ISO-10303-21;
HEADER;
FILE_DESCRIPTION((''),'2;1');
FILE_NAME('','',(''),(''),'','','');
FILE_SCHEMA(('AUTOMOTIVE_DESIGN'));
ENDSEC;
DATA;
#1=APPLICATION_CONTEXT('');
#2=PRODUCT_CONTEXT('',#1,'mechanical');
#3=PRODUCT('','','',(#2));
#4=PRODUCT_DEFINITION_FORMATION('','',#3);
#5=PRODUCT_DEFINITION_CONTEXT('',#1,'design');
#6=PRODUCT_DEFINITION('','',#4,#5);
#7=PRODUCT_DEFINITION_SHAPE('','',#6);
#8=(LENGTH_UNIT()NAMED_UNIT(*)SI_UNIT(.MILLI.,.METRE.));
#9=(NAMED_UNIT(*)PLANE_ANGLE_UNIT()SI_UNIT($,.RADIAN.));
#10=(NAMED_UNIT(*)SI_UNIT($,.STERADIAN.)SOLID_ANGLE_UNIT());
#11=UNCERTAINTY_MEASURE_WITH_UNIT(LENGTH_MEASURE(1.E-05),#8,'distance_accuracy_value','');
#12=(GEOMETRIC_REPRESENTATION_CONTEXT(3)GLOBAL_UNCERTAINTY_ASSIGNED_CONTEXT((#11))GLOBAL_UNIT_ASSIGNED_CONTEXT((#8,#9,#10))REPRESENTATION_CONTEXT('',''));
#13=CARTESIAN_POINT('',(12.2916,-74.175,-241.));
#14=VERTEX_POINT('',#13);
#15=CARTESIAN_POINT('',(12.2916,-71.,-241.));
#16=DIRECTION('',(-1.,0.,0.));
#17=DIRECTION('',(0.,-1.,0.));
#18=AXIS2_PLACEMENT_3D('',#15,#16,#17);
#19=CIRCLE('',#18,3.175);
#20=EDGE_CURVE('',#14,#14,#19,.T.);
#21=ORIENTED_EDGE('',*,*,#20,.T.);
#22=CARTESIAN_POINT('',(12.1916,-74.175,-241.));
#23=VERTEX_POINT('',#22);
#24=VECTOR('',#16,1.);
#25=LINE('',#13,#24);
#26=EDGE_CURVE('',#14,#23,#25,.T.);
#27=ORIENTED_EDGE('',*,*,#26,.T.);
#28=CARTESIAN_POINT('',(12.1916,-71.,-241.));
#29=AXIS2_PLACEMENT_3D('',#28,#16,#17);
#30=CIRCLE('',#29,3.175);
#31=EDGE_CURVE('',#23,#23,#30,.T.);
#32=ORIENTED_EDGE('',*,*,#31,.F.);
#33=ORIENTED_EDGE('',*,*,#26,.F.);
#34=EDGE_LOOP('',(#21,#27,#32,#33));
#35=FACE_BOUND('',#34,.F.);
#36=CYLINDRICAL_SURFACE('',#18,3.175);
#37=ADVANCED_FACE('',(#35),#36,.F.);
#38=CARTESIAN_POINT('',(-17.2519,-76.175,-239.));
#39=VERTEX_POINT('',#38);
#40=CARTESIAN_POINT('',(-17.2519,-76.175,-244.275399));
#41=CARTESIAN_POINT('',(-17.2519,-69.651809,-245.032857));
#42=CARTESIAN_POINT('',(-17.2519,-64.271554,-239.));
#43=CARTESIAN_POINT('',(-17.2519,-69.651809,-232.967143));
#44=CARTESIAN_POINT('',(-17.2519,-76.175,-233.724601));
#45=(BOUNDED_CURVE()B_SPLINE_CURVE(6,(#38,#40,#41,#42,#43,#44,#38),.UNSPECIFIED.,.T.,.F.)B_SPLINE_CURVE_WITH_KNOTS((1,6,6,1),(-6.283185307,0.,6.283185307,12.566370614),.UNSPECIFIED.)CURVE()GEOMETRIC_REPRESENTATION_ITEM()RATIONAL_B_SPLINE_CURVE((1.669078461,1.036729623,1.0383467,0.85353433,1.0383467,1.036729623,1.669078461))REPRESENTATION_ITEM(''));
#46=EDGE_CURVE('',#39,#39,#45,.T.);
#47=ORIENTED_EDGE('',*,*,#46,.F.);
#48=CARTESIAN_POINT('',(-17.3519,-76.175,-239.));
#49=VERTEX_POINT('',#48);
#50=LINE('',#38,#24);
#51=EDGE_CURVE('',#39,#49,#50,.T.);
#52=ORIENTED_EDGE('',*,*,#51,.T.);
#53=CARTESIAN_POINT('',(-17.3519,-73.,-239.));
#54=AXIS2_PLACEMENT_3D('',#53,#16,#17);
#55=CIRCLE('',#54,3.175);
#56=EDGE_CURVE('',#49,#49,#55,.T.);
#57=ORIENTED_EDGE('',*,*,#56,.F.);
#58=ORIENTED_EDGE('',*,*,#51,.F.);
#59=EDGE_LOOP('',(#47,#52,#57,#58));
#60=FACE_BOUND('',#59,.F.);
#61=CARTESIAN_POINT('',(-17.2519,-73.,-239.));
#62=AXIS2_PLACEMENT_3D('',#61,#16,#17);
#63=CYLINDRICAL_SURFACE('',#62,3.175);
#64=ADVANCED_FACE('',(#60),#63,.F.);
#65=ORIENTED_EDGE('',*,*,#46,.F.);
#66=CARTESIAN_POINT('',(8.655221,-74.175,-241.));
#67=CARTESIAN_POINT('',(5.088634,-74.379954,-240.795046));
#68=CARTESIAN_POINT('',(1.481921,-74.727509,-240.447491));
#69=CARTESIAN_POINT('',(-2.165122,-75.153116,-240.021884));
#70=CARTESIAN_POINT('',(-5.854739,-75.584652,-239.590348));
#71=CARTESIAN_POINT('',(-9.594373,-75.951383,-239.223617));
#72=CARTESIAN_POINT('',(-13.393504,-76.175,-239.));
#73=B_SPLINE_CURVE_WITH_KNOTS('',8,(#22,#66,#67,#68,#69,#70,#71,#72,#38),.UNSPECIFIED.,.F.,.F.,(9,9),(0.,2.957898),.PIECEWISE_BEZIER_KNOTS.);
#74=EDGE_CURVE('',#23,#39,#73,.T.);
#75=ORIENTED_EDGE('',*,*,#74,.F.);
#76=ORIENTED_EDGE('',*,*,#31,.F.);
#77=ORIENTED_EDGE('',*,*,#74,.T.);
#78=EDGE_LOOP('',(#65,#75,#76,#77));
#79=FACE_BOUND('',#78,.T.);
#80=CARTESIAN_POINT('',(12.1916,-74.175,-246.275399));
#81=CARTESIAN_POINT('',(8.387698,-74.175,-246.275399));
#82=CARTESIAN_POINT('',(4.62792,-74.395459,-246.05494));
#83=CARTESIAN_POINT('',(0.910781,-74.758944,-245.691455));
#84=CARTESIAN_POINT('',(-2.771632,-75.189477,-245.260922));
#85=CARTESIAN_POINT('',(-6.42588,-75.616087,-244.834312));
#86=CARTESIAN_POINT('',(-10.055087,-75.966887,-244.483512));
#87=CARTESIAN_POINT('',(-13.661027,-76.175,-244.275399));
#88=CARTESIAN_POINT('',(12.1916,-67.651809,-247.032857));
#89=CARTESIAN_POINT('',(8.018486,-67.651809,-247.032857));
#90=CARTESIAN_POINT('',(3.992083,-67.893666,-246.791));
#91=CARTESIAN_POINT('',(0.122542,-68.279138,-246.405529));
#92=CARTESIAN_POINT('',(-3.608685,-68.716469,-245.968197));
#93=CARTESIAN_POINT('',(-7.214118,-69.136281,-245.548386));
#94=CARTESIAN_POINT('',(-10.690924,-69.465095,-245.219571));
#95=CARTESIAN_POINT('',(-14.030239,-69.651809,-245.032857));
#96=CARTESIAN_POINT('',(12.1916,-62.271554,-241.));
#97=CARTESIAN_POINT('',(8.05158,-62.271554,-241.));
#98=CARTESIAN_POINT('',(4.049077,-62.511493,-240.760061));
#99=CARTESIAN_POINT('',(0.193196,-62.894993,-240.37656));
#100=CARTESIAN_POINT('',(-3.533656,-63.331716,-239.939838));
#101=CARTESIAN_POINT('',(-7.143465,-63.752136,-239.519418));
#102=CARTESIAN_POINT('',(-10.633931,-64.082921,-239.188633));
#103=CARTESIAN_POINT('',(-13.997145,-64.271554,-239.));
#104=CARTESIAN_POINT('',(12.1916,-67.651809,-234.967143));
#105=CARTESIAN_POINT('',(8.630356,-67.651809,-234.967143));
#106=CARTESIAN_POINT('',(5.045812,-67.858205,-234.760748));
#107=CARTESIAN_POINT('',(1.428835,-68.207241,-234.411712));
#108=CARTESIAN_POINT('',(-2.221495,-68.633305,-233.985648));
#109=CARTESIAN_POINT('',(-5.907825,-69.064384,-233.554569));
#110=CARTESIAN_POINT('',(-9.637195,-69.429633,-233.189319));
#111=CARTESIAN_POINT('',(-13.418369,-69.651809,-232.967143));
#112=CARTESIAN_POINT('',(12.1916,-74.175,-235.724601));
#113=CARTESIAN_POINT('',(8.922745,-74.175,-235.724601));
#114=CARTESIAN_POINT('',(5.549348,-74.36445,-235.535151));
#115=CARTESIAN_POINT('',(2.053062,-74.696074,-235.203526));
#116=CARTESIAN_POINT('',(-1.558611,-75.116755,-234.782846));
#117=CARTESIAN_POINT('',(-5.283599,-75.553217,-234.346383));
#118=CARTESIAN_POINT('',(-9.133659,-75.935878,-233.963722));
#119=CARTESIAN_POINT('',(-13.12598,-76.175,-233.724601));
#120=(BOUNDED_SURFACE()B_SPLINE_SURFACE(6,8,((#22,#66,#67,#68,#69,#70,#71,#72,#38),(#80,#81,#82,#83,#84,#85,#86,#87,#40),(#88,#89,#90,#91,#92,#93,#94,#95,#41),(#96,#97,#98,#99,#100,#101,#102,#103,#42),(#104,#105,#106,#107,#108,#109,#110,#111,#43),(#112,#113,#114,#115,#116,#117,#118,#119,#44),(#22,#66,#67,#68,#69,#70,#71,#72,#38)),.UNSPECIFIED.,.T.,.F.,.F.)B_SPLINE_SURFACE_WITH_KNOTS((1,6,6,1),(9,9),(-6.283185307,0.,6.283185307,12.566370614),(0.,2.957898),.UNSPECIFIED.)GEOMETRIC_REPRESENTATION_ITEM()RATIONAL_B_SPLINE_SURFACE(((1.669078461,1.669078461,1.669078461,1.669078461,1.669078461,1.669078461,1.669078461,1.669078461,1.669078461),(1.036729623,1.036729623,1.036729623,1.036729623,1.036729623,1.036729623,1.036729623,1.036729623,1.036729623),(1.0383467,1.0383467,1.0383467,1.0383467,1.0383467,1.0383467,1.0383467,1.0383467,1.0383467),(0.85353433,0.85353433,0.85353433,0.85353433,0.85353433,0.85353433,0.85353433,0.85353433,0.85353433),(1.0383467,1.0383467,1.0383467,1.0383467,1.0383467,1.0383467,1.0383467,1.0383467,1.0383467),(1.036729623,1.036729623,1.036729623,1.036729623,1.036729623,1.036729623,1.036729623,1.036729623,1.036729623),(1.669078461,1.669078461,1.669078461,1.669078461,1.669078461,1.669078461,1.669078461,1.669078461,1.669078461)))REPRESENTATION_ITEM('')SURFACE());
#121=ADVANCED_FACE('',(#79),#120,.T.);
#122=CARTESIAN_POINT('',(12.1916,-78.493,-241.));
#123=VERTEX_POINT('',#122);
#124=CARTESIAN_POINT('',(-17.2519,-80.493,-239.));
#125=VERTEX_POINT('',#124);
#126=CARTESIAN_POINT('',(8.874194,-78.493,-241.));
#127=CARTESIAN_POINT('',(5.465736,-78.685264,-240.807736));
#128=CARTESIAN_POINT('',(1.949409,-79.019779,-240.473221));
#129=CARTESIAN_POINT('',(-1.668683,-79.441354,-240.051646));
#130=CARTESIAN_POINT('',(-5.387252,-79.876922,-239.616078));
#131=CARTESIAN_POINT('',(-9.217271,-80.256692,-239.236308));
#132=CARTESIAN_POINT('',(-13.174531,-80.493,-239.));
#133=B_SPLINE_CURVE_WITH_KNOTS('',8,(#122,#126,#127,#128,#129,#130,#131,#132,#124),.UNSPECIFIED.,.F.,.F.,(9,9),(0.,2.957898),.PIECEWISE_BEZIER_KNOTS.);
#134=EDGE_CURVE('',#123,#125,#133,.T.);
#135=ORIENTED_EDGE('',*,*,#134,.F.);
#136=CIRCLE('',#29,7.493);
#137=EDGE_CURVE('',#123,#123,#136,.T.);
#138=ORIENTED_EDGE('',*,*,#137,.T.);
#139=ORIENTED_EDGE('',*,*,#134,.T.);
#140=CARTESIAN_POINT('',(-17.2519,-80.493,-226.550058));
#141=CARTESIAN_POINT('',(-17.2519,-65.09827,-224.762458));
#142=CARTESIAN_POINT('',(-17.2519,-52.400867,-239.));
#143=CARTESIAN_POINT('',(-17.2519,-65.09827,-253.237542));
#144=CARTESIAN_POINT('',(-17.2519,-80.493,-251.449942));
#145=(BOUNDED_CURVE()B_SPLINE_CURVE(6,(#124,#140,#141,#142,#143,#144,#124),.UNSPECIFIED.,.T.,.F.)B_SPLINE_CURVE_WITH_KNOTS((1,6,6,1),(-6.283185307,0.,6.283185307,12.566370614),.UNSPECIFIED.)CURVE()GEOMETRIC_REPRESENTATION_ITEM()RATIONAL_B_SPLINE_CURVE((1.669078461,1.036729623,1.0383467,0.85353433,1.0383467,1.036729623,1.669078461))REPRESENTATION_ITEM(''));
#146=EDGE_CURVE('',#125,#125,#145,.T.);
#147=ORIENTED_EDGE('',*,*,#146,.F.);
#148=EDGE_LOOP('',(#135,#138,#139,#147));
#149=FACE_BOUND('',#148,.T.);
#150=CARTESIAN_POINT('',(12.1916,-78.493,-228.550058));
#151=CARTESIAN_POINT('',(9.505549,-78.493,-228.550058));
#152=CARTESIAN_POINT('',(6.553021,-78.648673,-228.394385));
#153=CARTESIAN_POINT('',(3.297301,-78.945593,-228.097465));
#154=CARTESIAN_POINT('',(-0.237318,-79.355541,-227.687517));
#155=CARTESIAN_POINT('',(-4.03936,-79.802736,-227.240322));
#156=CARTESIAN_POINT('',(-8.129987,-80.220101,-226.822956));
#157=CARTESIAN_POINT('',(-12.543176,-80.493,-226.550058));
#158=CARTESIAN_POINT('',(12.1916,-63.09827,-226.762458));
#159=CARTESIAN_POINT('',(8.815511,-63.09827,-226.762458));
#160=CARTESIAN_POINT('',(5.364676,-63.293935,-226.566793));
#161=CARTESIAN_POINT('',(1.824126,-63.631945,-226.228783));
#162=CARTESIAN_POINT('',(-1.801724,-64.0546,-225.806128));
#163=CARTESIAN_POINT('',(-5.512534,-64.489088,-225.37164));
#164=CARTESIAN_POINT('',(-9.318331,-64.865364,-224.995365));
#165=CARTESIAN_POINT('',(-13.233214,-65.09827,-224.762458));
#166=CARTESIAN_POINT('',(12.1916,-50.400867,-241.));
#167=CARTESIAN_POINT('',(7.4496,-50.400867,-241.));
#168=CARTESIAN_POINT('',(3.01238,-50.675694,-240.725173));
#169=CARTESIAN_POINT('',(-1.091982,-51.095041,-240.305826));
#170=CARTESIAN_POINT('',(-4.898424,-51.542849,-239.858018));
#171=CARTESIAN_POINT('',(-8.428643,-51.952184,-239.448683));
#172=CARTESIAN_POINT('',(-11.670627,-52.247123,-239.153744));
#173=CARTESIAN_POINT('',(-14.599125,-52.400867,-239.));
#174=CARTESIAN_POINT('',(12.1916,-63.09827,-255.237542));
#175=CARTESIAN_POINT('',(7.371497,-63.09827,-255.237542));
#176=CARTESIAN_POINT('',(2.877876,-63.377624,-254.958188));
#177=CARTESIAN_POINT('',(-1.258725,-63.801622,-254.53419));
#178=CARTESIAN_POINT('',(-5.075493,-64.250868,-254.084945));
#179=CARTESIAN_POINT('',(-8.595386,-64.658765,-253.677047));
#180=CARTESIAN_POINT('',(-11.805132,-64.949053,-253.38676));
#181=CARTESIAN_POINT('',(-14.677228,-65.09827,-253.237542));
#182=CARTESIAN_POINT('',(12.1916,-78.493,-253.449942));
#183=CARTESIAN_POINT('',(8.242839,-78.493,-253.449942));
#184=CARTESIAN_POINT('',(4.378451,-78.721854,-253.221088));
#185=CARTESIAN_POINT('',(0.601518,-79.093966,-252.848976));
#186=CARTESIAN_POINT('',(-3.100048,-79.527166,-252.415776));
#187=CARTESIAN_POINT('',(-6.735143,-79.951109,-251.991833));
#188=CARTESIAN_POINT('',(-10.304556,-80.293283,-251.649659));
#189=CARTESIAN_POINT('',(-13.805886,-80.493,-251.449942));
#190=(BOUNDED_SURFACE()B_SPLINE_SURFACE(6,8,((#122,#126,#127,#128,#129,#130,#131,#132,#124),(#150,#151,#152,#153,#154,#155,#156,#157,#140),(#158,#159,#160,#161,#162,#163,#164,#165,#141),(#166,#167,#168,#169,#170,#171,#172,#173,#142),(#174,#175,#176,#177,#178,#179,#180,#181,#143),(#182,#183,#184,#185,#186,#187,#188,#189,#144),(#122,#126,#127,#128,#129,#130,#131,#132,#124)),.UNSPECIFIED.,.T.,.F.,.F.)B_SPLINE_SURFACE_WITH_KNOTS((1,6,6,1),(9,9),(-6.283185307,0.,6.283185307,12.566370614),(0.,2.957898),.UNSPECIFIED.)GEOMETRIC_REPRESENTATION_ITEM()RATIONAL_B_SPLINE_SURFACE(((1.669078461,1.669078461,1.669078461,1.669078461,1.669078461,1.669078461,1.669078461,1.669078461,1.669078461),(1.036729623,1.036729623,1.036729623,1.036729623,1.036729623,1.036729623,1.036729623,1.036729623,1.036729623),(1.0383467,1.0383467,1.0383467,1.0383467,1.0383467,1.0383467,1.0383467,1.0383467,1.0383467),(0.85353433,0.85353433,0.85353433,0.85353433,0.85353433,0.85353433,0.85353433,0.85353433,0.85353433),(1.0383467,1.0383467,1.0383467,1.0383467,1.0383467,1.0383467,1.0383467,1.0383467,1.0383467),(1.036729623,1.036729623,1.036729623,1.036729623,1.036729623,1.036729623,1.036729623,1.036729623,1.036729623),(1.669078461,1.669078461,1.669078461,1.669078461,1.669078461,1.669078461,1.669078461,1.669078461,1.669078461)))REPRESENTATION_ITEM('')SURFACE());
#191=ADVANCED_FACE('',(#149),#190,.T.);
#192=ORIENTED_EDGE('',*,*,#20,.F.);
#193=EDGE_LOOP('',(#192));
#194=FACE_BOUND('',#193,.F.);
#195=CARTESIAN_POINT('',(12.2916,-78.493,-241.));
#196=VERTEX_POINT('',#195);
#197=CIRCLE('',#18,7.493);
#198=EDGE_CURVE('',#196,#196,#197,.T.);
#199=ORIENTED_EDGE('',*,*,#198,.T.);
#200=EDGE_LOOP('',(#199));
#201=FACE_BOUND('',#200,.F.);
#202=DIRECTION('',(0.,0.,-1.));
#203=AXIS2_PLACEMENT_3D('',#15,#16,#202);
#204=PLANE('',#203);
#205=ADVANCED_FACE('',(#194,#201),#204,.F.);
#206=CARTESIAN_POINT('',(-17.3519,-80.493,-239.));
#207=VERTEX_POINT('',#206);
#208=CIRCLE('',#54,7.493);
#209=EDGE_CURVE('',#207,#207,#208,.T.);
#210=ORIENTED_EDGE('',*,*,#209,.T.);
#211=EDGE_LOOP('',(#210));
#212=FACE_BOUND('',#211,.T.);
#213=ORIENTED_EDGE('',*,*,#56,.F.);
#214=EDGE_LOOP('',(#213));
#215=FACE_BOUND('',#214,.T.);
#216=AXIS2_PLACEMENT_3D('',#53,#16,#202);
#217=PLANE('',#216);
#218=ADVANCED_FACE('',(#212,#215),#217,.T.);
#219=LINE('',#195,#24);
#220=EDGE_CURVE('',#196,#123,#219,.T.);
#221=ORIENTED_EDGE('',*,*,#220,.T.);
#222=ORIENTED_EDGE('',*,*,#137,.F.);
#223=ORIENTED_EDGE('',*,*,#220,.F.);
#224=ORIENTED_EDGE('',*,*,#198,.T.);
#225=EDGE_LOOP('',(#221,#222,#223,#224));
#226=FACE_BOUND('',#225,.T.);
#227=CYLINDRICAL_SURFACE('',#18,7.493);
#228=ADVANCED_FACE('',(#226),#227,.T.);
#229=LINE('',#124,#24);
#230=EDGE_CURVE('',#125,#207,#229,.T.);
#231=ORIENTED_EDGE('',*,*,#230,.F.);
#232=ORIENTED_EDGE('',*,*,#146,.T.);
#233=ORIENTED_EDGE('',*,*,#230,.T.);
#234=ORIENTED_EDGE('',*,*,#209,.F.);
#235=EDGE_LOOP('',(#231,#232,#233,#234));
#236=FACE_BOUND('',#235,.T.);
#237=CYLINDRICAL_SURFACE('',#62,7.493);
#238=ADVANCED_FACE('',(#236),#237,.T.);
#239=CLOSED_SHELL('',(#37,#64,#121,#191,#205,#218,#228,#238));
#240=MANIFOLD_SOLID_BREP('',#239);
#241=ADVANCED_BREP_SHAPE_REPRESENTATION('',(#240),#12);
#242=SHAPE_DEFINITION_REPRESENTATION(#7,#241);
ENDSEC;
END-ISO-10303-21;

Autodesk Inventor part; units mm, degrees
ref_plane "YZ Plane" through (0, 0, 0) normal (1, 0, 0) x (0, 1, 0)
ref_plane "XZ Plane" through (0, 0, 0) normal (0, 1, 0) x (-1, 0, 0)
ref_plane "XY Plane" through (0, 0, 0) normal (0, 0, 1) x (1, 0, 0)
ref_plane "Plano de trabajo1" through (12.1916, -71, -241) normal (-1, 0, 0) x (0, -1, 0)
sketch "Boceto2" plane through (12.1916, -71, -241) normal (-1, 0, 0) x (0, -1, 0)
  circle A0 centre (0, 0) radius 7.493
  circle A1 centre (0, 0) radius 3.175
sketch3d "Boceto 3D1"
  line L0 (12.2916, -71, -241) -> (12.1916, -71, -241)
  spline S0 degree 3 poles (12.1916, -71, -241) (2.3319, -71, -241) (-7.3922, -73, -239) (-17.2519, -73, -239) knots 0 0 0 0 2.957898 2.957898 2.957898 2.957898
  line L1 (-17.2519, -73, -239) -> (-17.3519, -73, -239)
  dimension "d4" = 1
  dimension "d5" = 1
sweep "Barrido1" add profiles "Boceto2" path "Boceto 3D1"
equation "\"ID\" = 6.35"
equation "\"OD\" = 14.986"
equation "\"L\" = PL"
equation "\"PL\" = 29.6164"
equation "\"Size_Designation\" = 0.25"
equation "\"RPL\" = 29.9974"
equation "\"OPL\" = 29.6164"
equation "\"ROPL\" = 29.9974"
properties material "Caucho"
